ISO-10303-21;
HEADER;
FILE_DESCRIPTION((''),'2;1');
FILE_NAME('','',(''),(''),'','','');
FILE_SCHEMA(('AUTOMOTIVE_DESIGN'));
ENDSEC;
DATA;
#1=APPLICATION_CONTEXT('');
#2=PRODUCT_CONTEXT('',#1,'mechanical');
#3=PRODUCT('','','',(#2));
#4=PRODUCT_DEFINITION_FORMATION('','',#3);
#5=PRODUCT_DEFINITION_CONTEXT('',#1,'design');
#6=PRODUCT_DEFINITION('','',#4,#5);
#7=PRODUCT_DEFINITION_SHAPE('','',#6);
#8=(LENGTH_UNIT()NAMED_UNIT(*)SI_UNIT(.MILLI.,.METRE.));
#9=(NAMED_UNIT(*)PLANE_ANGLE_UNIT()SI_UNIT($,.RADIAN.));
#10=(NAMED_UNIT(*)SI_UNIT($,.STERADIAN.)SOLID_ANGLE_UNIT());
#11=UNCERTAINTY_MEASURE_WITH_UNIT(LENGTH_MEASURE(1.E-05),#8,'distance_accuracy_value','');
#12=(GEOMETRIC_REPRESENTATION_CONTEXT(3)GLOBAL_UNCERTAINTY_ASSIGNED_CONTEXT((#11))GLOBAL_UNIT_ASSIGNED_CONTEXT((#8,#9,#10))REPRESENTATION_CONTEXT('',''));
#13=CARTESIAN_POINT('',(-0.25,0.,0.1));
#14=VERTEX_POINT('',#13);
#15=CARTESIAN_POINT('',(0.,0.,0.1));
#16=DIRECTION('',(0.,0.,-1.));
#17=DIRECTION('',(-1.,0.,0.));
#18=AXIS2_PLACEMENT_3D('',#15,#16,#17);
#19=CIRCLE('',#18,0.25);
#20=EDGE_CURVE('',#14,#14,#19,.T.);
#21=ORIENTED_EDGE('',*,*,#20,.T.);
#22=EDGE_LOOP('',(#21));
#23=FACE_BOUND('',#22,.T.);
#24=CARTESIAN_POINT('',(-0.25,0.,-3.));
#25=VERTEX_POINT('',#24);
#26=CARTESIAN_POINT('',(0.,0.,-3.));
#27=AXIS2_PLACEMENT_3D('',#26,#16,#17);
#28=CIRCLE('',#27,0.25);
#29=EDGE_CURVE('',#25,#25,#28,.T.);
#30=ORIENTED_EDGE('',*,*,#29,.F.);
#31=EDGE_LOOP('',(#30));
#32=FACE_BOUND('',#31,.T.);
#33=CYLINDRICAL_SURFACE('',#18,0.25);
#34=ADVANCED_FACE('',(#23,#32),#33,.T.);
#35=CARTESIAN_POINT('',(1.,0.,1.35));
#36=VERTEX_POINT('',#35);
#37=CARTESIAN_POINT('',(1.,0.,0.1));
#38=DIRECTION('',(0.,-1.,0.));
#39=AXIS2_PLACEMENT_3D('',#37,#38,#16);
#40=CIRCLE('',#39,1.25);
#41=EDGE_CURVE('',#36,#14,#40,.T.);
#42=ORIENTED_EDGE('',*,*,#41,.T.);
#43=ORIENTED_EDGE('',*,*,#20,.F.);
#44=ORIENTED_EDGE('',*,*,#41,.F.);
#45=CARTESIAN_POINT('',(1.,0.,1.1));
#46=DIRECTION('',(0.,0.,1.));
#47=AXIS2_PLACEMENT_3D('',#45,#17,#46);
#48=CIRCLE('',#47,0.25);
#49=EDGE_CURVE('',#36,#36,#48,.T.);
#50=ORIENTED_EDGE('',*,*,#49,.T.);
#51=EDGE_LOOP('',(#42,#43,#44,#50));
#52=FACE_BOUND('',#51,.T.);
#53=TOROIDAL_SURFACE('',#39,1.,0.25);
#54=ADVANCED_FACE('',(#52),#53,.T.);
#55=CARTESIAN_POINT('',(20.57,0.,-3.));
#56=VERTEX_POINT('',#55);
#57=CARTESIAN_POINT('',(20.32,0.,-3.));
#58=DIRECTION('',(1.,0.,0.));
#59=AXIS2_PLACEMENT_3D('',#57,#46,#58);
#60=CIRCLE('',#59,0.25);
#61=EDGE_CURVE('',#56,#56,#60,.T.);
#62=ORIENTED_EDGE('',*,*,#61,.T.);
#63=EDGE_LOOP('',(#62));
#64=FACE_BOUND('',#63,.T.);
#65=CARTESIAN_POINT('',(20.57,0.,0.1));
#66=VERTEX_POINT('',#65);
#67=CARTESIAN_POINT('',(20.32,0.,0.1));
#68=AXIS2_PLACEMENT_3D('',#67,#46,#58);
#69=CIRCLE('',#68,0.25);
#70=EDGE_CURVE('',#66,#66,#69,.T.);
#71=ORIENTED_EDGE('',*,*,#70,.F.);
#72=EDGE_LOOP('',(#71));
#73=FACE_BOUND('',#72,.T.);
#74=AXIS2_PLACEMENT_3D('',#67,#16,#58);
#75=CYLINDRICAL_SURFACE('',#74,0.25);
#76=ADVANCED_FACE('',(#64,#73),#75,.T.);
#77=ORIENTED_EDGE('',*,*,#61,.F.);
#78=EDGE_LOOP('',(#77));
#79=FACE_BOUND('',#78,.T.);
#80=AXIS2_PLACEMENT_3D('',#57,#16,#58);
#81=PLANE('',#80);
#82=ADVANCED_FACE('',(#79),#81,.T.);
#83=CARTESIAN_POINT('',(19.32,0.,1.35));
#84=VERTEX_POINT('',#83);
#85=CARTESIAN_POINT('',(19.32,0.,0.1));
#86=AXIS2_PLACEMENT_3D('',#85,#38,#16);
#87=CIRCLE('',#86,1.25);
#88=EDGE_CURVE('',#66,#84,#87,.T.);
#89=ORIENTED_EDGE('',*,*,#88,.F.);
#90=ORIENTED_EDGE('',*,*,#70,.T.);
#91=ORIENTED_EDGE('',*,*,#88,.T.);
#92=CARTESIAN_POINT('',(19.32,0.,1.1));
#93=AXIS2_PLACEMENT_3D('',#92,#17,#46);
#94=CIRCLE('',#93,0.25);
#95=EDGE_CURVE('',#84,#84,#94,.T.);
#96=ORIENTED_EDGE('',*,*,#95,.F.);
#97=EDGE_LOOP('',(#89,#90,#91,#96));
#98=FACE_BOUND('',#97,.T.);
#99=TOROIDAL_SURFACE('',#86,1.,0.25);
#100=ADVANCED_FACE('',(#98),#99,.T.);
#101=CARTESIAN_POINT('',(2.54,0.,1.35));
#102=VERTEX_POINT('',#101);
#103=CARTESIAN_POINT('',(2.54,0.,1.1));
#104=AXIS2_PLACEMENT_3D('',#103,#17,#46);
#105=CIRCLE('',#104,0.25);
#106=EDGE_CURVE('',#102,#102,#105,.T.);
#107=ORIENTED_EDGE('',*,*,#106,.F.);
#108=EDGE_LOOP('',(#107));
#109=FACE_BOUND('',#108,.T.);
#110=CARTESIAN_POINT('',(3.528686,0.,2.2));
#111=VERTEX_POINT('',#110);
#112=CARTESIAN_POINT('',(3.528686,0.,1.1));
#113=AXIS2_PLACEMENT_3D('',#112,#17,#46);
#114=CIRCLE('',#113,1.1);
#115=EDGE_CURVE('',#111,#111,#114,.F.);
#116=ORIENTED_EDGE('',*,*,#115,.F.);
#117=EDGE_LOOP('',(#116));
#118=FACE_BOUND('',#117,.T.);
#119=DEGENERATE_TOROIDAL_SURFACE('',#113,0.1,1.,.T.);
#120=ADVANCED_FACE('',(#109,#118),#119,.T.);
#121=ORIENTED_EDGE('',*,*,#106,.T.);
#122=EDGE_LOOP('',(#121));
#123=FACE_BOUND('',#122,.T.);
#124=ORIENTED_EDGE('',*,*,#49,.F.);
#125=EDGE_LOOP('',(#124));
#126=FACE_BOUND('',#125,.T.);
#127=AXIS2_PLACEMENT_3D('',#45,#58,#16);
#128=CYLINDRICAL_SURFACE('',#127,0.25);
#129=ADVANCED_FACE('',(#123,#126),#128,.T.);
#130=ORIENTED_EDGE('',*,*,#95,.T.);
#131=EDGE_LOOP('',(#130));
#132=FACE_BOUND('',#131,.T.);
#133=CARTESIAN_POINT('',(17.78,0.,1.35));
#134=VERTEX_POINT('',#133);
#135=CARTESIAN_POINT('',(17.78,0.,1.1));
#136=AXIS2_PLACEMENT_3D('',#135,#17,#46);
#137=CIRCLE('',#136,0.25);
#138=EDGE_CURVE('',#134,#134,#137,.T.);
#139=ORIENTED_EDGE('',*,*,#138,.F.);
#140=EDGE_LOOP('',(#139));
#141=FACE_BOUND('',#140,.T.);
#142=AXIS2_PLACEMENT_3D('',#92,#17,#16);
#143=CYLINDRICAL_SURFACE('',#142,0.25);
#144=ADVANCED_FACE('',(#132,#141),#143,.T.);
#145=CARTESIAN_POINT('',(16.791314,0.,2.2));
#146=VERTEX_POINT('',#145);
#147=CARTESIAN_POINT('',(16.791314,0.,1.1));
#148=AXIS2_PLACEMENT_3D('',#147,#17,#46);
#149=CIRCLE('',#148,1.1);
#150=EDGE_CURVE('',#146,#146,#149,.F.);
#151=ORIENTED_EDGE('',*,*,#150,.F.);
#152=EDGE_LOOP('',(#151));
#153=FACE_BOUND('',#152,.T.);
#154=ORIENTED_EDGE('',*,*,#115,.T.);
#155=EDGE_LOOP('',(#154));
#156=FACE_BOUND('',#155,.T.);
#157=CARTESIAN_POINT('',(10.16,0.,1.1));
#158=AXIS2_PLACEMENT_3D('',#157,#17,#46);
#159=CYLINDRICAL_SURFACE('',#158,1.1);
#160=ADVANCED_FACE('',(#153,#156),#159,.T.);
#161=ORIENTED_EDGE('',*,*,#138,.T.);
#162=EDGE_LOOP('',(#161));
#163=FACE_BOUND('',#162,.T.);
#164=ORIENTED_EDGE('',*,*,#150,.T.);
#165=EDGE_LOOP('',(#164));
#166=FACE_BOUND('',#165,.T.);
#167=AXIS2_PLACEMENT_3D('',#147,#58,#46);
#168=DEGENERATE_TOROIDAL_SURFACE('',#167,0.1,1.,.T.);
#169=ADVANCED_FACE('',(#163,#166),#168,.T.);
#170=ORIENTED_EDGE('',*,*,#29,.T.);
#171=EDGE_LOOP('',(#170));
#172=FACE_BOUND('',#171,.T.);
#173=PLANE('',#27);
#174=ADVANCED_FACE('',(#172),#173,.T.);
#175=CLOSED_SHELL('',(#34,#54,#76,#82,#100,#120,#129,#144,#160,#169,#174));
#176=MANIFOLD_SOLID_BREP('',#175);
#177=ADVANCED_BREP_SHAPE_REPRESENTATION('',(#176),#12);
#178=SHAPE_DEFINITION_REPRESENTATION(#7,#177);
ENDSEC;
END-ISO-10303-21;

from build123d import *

# Parameters (mm, degrees)
EXTRUDE1_START = 2.54
SKETCH1_R      = 1.1
EXTRUDE1_DEPTH = 7.62
SKETCH3_R      = 0.25
FILLET1_R      = 1


with BuildPart() as part:
    # Sketch1 → Extrude1 (new body)
    with BuildSketch(Plane(origin=(0, 0, 0), x_dir=(0, 0, -1), z_dir=(1, 0, 0)).offset(EXTRUDE1_START)):
        with Locations((-1.1, 0)):
            Circle(SKETCH1_R)
    extrude(amount=EXTRUDE1_DEPTH)

    # Sweep1: sweep along a path in Sketch2
    with BuildLine(Plane(origin=(0, 0, 0), x_dir=(1, 0, 0), z_dir=(0, 1, 0))) as sweep1_path:
        Line((2.54, -1.1), (1, -1.1))
        ThreePointArc((1, -1.1), (0.292893219, -0.807106781), (0, -0.1))
        Line((0, -0.1), (0, 3))
    # Sketch3 → Sweep1 (sweep)
    with BuildSketch(Plane.ZY.offset(-2.54)):
        with Locations((1.1, 0)):
            Circle(SKETCH3_R)
    sweep(path=sweep1_path.line)

    # Fillet1
    # the kernel refuses this fillet: 1 mm, written as the material it takes off along each edge
    with BuildSketch(Plane(origin=(2.54, 0, 1.1), x_dir=(0, 0, -1), z_dir=(0, -1, 0))) as fillet1_piece_1:
        with BuildLine():
            CenterArc((0.1, 0.988685997), FILLET1_R, 278.626926559, 81.373073441)
            Line((0.25, 0), (0.253, -0.01977372))
            ThreePointArc((0.253, -0.01977372), (0.675, -0.02), (1.1, -0.02))
            Line((1.1, -0.02), (1.12, 0))
            Line((1.12, 0), (1.12, 0.988685997))
            Line((1.12, 0.988685997), (1.1, 0.988685997))
        make_face()
    revolve(axis=Axis((2.54, 0, 1.1), (1, 0, 0)), mode=Mode.SUBTRACT)

    # Mirror1: part across plane


with BuildPart() as part_1:
    add(part.part)
    add(part.part.mirror(Plane(origin=(10.16, 0, 1.1), x_dir=(0, 0, 1), z_dir=(1, 0, 0))))


solid = part_1.part
